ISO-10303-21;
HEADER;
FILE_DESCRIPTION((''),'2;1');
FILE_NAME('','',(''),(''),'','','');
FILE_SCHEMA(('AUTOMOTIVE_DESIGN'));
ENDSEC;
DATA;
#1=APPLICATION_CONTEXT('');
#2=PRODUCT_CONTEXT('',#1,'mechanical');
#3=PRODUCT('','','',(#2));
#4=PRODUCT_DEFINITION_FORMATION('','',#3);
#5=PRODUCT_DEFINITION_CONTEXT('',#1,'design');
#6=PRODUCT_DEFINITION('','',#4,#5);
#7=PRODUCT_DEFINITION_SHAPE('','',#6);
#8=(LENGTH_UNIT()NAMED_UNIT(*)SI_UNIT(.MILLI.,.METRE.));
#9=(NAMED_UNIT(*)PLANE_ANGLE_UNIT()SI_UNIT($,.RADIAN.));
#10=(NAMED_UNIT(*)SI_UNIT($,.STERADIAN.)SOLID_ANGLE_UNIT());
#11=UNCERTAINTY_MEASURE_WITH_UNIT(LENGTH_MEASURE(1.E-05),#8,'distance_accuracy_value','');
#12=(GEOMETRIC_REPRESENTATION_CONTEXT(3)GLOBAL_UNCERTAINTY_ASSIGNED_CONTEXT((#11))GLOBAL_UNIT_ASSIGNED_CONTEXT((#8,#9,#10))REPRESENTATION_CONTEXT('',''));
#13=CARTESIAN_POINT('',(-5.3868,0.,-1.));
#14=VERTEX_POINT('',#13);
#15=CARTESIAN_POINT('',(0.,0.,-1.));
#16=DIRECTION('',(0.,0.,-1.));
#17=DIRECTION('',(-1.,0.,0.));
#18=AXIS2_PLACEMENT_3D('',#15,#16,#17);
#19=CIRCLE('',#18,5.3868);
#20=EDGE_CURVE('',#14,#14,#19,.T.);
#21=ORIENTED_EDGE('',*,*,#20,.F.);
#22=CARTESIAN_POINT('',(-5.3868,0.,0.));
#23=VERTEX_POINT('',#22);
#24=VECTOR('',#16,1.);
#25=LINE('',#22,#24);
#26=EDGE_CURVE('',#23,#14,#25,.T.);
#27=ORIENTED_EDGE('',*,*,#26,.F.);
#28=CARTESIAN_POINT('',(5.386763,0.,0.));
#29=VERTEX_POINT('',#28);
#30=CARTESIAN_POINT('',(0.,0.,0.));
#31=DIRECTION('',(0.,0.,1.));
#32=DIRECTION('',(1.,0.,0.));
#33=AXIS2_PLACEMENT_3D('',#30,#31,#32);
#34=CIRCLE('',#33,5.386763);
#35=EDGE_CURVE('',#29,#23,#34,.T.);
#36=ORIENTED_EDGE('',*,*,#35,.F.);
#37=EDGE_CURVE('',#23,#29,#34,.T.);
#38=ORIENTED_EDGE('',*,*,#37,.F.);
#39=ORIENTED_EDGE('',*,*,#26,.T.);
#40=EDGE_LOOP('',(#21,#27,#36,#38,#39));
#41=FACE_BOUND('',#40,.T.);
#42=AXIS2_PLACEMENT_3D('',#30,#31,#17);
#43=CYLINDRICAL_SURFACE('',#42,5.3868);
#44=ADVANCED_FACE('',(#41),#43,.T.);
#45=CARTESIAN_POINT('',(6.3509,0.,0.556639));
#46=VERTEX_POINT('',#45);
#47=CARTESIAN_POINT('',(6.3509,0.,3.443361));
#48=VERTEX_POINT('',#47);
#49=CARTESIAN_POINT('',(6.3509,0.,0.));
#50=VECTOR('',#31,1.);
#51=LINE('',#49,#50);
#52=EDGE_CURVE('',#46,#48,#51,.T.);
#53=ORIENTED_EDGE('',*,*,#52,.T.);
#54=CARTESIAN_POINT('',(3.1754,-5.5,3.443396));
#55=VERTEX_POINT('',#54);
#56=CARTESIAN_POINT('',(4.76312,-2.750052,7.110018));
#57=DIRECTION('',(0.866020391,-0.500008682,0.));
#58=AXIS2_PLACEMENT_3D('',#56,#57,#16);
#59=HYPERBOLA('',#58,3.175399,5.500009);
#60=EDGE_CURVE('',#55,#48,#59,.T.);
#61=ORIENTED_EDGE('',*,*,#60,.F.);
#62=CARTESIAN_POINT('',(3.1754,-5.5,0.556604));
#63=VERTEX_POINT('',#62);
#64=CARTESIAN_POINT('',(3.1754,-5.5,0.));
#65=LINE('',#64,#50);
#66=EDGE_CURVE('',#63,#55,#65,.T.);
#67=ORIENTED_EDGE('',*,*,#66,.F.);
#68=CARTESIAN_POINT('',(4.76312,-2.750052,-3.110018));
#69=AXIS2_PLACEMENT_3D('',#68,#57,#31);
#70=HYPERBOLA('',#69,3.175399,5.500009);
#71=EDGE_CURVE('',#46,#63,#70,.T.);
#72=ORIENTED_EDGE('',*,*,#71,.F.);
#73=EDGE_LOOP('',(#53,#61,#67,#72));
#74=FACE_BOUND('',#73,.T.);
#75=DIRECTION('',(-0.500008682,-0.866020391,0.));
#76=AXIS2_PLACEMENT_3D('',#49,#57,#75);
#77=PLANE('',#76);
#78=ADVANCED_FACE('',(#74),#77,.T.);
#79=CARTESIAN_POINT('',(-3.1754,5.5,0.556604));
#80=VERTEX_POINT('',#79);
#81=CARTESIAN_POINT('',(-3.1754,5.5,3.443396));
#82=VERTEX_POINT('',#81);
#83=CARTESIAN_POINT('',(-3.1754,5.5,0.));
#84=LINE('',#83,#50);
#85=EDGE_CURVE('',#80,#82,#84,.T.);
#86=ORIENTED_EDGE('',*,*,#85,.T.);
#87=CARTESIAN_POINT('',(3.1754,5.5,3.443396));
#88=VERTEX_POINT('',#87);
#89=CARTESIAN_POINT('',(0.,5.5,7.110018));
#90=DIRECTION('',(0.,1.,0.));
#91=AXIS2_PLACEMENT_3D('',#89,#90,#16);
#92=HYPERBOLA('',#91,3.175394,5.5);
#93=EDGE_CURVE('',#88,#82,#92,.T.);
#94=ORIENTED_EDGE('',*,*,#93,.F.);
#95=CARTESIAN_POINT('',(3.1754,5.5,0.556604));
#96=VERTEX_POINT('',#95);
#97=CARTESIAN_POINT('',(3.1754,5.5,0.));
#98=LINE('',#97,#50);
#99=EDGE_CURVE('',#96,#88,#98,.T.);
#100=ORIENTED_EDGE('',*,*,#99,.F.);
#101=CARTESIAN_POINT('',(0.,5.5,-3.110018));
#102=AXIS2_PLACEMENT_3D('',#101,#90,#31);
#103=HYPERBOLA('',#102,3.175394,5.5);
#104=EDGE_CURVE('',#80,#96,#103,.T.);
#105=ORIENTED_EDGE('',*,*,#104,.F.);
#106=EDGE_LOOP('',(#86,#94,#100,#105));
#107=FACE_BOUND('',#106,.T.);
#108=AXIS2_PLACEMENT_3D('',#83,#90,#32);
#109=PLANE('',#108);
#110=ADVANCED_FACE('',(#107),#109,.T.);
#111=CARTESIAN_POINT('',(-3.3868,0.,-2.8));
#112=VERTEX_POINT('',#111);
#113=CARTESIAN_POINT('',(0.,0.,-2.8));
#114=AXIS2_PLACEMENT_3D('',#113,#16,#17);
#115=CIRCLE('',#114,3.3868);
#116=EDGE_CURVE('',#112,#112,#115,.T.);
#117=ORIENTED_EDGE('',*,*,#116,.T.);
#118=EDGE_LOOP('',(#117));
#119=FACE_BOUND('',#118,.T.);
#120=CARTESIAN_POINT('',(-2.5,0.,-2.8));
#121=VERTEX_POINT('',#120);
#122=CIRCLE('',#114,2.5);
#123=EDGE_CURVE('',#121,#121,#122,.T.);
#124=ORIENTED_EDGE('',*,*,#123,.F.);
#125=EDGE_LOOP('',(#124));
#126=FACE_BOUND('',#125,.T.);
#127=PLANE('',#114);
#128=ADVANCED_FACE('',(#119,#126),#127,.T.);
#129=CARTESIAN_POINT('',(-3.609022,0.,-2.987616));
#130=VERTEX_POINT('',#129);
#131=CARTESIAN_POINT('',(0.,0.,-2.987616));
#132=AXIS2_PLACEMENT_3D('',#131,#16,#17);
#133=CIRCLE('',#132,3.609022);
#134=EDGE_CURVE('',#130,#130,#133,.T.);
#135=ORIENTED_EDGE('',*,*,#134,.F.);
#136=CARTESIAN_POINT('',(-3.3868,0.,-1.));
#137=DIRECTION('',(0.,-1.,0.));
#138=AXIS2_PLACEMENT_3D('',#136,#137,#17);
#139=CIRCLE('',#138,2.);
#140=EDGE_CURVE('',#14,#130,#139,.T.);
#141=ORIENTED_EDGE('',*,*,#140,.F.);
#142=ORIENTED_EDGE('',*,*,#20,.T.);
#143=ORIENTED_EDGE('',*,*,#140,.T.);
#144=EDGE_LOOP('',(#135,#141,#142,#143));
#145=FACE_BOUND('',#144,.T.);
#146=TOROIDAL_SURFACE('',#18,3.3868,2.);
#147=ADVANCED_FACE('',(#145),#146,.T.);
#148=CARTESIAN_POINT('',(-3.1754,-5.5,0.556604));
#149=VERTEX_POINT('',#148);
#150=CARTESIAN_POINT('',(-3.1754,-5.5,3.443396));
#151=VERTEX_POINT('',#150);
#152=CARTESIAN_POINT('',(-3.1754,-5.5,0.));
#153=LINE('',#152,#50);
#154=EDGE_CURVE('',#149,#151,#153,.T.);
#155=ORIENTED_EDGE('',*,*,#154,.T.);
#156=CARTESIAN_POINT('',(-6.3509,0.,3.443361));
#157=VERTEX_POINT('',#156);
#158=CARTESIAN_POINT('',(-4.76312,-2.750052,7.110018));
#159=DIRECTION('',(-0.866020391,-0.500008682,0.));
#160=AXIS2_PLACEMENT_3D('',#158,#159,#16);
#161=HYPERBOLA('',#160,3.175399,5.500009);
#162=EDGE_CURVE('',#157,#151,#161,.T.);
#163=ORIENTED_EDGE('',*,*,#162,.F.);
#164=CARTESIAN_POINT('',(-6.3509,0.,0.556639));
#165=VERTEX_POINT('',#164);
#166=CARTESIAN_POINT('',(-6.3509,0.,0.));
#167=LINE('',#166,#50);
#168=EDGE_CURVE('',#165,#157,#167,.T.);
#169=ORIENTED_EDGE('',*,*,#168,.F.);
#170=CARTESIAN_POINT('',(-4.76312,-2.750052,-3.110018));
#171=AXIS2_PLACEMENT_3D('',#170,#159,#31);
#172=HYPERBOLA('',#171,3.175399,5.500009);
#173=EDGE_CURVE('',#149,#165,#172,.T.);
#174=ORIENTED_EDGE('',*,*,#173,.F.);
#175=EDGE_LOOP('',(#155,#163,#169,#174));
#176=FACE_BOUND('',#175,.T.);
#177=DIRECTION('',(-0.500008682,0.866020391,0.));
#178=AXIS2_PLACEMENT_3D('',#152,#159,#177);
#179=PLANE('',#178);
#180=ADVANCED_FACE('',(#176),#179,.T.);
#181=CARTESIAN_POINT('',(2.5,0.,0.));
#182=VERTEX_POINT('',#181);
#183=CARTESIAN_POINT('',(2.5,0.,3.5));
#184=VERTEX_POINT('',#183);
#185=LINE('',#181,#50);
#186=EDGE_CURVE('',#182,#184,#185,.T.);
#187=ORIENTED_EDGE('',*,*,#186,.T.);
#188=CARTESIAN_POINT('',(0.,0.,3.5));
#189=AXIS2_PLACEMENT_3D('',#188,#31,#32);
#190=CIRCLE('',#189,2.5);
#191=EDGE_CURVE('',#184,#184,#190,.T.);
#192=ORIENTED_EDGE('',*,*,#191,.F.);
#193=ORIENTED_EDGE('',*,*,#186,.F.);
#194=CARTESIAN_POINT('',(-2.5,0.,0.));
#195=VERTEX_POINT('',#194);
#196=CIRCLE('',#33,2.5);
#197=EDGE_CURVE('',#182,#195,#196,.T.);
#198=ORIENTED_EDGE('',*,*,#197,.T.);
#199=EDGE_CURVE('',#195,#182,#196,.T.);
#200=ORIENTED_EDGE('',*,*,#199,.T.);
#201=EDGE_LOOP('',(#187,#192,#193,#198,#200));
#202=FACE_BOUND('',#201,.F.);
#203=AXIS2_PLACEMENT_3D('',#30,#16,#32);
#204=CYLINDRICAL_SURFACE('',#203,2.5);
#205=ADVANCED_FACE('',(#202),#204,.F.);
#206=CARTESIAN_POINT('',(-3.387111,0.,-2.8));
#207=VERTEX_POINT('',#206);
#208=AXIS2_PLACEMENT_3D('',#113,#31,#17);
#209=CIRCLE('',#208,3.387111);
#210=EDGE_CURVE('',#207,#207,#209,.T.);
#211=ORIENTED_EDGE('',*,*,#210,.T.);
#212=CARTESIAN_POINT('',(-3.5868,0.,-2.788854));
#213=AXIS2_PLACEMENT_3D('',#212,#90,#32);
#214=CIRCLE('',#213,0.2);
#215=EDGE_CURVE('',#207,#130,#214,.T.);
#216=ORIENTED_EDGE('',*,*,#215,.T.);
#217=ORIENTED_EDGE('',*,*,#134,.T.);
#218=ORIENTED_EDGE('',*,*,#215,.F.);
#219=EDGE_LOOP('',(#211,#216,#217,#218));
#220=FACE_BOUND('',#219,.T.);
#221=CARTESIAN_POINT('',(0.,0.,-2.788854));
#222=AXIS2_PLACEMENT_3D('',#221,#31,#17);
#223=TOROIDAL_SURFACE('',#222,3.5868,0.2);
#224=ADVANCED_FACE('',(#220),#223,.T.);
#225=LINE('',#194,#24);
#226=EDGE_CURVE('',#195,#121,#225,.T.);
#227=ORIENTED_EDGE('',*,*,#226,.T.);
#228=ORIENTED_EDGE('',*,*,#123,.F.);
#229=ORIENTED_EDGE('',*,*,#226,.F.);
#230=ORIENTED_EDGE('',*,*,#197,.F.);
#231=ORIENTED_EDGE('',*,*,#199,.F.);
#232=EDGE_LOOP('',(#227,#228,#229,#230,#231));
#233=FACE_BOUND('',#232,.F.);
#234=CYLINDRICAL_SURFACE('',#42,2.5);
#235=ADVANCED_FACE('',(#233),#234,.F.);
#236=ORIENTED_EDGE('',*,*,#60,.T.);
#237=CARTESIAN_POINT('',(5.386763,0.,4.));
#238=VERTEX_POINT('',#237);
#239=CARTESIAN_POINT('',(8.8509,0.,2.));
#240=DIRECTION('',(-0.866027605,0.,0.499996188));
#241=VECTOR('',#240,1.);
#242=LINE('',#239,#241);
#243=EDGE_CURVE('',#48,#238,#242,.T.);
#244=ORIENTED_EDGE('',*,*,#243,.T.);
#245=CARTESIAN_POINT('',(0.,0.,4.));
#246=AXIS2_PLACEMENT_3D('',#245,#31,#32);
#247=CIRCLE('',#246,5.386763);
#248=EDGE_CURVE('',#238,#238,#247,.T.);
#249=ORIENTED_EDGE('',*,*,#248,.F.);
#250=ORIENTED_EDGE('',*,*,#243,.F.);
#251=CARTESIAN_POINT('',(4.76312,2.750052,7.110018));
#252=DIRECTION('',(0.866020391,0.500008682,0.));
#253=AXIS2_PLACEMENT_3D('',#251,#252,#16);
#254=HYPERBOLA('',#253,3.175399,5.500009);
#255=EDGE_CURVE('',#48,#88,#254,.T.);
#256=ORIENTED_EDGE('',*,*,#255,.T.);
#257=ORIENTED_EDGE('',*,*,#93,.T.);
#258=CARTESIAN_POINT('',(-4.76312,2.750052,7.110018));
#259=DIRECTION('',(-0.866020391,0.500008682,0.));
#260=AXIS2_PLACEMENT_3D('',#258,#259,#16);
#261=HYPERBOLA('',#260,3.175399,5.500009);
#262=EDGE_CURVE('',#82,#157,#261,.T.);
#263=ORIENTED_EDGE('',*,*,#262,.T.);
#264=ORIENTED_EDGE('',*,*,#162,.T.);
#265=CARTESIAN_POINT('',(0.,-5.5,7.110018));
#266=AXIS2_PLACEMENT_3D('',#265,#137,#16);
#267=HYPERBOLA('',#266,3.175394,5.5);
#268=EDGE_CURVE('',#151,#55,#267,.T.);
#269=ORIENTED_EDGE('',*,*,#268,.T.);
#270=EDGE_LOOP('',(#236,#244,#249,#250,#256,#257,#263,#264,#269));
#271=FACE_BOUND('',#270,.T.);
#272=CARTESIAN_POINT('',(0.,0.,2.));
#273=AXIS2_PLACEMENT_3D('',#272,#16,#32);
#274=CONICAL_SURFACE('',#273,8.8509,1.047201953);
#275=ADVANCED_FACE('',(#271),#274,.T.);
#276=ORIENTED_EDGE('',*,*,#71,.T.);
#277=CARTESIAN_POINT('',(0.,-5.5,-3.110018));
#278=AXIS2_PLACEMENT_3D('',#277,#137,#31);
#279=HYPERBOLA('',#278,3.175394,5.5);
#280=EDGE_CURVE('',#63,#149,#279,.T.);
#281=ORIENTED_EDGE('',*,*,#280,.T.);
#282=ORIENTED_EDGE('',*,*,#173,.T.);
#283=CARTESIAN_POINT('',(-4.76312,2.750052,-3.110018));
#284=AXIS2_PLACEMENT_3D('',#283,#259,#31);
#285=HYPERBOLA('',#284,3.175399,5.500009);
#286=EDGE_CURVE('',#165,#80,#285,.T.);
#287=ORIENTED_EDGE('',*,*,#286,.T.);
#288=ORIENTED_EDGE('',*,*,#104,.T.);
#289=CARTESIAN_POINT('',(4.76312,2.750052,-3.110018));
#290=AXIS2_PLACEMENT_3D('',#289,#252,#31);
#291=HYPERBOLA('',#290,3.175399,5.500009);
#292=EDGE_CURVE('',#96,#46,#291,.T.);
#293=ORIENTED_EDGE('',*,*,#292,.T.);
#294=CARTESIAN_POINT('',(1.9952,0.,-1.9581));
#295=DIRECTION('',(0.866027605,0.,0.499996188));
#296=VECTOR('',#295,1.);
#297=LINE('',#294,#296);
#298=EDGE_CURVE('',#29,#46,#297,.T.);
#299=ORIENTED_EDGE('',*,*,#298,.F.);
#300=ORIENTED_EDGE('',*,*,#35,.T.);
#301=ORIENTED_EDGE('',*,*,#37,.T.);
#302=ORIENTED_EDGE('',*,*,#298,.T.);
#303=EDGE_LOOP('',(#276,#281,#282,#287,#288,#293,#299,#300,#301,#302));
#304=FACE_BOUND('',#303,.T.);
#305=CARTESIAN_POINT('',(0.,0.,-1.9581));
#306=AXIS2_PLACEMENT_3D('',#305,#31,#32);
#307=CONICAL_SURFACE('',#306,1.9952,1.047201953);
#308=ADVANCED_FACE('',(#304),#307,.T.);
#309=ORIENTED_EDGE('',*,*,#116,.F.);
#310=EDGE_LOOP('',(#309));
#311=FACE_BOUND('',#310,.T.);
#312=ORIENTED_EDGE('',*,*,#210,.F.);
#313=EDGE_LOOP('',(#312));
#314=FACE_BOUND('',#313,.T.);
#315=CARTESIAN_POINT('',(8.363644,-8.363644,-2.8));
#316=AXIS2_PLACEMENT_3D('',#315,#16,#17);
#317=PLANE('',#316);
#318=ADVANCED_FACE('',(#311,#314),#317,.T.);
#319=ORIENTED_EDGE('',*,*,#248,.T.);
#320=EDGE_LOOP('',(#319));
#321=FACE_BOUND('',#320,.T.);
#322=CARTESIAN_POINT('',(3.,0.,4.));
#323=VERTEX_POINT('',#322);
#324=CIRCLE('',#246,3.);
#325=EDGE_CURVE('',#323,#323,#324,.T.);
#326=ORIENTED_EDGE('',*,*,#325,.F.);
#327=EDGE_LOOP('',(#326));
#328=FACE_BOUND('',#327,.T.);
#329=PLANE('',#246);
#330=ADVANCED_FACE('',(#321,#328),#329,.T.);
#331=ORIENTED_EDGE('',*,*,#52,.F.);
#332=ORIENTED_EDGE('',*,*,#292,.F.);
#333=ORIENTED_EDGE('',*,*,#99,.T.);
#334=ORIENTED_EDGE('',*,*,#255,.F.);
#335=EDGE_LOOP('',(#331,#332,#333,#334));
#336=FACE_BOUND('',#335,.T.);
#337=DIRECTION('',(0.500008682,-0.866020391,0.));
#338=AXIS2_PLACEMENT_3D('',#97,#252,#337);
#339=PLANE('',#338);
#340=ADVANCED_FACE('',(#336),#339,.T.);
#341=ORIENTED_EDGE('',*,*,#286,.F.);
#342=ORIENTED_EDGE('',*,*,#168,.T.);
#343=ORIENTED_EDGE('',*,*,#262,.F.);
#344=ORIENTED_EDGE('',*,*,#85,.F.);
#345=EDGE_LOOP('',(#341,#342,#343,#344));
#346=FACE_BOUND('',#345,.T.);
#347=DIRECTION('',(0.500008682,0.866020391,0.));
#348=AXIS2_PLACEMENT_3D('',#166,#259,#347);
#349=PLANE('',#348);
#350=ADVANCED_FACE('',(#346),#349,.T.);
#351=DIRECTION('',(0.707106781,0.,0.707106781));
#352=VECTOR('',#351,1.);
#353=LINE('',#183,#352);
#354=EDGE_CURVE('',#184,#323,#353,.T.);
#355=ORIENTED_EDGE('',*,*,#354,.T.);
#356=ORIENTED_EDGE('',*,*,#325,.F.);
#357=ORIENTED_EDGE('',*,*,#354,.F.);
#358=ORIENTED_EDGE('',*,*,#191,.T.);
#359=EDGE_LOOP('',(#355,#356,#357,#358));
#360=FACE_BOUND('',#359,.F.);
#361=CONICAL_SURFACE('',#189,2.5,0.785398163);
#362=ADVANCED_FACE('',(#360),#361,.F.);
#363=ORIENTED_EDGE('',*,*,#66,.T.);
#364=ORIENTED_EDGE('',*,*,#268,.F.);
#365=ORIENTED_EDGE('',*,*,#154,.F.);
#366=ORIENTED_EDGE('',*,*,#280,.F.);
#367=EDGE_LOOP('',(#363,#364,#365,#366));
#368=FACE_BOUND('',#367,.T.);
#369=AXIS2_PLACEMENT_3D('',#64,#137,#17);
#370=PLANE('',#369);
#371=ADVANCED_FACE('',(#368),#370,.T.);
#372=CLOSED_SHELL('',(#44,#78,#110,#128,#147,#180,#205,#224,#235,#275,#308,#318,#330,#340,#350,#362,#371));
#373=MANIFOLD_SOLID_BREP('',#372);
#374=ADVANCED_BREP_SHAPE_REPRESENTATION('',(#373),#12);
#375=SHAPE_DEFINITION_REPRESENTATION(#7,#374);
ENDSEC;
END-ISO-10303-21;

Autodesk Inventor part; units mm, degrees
ref_plane "YZ Plane" through (0, 0, 0) normal (1, 0, 0) x (0, 1, 0)
ref_plane "XZ Plane" through (0, 0, 0) normal (0, 1, 0) x (-1, 0, 0)
ref_plane "XY Plane" through (0, 0, 0) normal (0, 0, 1) x (1, 0, 0)
sketch "Эскиз1" plane through (0, 0, 0) normal (0, 0, 1) x (1, 0, 0)
  circle A0 centre (0, 0) radius 2.5
  line L0 (6.3509, 0) -> (3.1754, -5.5)
  line L1 (3.1754, -5.5) -> (-3.1754, -5.5)
  line L2 (-3.1754, -5.5) -> (-6.3509, 0)
  line L3 (-6.3509, 0) -> (-3.1754, 5.5)
  line L4 (-3.1754, 5.5) -> (3.1754, 5.5)
  line L5 (3.1754, 5.5) -> (6.3509, 0)
  dimension "d0" = 5
  dimension "d21" = 3
extrude "Выдавливание1" add sketch "Эскиз1" along normal blind 4
sketch "Эскиз2" plane through (0, 0, 0) normal (0, 1, 0) x (-1, 0, 0)
  line L0 (0, 0) -> (0, 12.9838)
  line L1 (-3.1754, 0) -> (-6.3509, 0) construction
  line L2 (-6.3509, 0) -> (-6.3509, 4) construction
  line L3 (-6.3509, 4) -> (-3.1754, 4) construction
  line L4 (-1.9952, -1.9581) -> (-8.8509, 2)
  line L5 (-8.8509, 2) -> (-1.9952, 5.9581)
  line L6 (-1.9952, 5.9581) -> (-9.8509, 5.9581)
  line L7 (-9.8509, 5.9581) -> (-9.8509, -1.9581)
  line L8 (-9.8509, -1.9581) -> (-1.9952, -1.9581)
  line L9 (-6.3509, 2) -> (-29.2681, 2) construction
  point P0 (-9.8509, 2)
  dimension "d4" = 60
  dimension "d5" = 1
  dimension "d6" = 3.5
revolve "Вращение1" cut sketch "Эскиз2" angle 360 about axis through (0, 0, 0) along (0, 0, 1)
sketch "Эскиз3" plane through (0, 0, 0) normal (0, 0, -1) x (-1, 0, 0)
  circle A0 centre (0, 0) radius 2.5 projected
  circle A1 centre (0, 0) radius 5.3868 projected
  circle A2 centre (0, 0) radius 5.3868
extrude "Выдавливание2" add sketch "Эскиз3" along normal blind 3
fillet "Сопряжение1" radius 2 1 edges at (5.3868, 0, -3)
chamfer "Фаска2" distance 0.5 angle 45 1 edges at (-2.5, 0, 4)
sketch "Sketch5" plane through (0, 0, -3) normal (0, 0, -1) x (-1, 0, 0)
  circle A0 centre (0, 0) radius 2.5 projected
  circle A1 centre (0, 0) radius 3.3868 projected
extrude "Extrusion4" cut sketch "Sketch5" against normal blind 0.2
fillet "Fillet3" radius 0.2 1 edges at (3.3868, 0, -3)
properties part number "paris_nut"
